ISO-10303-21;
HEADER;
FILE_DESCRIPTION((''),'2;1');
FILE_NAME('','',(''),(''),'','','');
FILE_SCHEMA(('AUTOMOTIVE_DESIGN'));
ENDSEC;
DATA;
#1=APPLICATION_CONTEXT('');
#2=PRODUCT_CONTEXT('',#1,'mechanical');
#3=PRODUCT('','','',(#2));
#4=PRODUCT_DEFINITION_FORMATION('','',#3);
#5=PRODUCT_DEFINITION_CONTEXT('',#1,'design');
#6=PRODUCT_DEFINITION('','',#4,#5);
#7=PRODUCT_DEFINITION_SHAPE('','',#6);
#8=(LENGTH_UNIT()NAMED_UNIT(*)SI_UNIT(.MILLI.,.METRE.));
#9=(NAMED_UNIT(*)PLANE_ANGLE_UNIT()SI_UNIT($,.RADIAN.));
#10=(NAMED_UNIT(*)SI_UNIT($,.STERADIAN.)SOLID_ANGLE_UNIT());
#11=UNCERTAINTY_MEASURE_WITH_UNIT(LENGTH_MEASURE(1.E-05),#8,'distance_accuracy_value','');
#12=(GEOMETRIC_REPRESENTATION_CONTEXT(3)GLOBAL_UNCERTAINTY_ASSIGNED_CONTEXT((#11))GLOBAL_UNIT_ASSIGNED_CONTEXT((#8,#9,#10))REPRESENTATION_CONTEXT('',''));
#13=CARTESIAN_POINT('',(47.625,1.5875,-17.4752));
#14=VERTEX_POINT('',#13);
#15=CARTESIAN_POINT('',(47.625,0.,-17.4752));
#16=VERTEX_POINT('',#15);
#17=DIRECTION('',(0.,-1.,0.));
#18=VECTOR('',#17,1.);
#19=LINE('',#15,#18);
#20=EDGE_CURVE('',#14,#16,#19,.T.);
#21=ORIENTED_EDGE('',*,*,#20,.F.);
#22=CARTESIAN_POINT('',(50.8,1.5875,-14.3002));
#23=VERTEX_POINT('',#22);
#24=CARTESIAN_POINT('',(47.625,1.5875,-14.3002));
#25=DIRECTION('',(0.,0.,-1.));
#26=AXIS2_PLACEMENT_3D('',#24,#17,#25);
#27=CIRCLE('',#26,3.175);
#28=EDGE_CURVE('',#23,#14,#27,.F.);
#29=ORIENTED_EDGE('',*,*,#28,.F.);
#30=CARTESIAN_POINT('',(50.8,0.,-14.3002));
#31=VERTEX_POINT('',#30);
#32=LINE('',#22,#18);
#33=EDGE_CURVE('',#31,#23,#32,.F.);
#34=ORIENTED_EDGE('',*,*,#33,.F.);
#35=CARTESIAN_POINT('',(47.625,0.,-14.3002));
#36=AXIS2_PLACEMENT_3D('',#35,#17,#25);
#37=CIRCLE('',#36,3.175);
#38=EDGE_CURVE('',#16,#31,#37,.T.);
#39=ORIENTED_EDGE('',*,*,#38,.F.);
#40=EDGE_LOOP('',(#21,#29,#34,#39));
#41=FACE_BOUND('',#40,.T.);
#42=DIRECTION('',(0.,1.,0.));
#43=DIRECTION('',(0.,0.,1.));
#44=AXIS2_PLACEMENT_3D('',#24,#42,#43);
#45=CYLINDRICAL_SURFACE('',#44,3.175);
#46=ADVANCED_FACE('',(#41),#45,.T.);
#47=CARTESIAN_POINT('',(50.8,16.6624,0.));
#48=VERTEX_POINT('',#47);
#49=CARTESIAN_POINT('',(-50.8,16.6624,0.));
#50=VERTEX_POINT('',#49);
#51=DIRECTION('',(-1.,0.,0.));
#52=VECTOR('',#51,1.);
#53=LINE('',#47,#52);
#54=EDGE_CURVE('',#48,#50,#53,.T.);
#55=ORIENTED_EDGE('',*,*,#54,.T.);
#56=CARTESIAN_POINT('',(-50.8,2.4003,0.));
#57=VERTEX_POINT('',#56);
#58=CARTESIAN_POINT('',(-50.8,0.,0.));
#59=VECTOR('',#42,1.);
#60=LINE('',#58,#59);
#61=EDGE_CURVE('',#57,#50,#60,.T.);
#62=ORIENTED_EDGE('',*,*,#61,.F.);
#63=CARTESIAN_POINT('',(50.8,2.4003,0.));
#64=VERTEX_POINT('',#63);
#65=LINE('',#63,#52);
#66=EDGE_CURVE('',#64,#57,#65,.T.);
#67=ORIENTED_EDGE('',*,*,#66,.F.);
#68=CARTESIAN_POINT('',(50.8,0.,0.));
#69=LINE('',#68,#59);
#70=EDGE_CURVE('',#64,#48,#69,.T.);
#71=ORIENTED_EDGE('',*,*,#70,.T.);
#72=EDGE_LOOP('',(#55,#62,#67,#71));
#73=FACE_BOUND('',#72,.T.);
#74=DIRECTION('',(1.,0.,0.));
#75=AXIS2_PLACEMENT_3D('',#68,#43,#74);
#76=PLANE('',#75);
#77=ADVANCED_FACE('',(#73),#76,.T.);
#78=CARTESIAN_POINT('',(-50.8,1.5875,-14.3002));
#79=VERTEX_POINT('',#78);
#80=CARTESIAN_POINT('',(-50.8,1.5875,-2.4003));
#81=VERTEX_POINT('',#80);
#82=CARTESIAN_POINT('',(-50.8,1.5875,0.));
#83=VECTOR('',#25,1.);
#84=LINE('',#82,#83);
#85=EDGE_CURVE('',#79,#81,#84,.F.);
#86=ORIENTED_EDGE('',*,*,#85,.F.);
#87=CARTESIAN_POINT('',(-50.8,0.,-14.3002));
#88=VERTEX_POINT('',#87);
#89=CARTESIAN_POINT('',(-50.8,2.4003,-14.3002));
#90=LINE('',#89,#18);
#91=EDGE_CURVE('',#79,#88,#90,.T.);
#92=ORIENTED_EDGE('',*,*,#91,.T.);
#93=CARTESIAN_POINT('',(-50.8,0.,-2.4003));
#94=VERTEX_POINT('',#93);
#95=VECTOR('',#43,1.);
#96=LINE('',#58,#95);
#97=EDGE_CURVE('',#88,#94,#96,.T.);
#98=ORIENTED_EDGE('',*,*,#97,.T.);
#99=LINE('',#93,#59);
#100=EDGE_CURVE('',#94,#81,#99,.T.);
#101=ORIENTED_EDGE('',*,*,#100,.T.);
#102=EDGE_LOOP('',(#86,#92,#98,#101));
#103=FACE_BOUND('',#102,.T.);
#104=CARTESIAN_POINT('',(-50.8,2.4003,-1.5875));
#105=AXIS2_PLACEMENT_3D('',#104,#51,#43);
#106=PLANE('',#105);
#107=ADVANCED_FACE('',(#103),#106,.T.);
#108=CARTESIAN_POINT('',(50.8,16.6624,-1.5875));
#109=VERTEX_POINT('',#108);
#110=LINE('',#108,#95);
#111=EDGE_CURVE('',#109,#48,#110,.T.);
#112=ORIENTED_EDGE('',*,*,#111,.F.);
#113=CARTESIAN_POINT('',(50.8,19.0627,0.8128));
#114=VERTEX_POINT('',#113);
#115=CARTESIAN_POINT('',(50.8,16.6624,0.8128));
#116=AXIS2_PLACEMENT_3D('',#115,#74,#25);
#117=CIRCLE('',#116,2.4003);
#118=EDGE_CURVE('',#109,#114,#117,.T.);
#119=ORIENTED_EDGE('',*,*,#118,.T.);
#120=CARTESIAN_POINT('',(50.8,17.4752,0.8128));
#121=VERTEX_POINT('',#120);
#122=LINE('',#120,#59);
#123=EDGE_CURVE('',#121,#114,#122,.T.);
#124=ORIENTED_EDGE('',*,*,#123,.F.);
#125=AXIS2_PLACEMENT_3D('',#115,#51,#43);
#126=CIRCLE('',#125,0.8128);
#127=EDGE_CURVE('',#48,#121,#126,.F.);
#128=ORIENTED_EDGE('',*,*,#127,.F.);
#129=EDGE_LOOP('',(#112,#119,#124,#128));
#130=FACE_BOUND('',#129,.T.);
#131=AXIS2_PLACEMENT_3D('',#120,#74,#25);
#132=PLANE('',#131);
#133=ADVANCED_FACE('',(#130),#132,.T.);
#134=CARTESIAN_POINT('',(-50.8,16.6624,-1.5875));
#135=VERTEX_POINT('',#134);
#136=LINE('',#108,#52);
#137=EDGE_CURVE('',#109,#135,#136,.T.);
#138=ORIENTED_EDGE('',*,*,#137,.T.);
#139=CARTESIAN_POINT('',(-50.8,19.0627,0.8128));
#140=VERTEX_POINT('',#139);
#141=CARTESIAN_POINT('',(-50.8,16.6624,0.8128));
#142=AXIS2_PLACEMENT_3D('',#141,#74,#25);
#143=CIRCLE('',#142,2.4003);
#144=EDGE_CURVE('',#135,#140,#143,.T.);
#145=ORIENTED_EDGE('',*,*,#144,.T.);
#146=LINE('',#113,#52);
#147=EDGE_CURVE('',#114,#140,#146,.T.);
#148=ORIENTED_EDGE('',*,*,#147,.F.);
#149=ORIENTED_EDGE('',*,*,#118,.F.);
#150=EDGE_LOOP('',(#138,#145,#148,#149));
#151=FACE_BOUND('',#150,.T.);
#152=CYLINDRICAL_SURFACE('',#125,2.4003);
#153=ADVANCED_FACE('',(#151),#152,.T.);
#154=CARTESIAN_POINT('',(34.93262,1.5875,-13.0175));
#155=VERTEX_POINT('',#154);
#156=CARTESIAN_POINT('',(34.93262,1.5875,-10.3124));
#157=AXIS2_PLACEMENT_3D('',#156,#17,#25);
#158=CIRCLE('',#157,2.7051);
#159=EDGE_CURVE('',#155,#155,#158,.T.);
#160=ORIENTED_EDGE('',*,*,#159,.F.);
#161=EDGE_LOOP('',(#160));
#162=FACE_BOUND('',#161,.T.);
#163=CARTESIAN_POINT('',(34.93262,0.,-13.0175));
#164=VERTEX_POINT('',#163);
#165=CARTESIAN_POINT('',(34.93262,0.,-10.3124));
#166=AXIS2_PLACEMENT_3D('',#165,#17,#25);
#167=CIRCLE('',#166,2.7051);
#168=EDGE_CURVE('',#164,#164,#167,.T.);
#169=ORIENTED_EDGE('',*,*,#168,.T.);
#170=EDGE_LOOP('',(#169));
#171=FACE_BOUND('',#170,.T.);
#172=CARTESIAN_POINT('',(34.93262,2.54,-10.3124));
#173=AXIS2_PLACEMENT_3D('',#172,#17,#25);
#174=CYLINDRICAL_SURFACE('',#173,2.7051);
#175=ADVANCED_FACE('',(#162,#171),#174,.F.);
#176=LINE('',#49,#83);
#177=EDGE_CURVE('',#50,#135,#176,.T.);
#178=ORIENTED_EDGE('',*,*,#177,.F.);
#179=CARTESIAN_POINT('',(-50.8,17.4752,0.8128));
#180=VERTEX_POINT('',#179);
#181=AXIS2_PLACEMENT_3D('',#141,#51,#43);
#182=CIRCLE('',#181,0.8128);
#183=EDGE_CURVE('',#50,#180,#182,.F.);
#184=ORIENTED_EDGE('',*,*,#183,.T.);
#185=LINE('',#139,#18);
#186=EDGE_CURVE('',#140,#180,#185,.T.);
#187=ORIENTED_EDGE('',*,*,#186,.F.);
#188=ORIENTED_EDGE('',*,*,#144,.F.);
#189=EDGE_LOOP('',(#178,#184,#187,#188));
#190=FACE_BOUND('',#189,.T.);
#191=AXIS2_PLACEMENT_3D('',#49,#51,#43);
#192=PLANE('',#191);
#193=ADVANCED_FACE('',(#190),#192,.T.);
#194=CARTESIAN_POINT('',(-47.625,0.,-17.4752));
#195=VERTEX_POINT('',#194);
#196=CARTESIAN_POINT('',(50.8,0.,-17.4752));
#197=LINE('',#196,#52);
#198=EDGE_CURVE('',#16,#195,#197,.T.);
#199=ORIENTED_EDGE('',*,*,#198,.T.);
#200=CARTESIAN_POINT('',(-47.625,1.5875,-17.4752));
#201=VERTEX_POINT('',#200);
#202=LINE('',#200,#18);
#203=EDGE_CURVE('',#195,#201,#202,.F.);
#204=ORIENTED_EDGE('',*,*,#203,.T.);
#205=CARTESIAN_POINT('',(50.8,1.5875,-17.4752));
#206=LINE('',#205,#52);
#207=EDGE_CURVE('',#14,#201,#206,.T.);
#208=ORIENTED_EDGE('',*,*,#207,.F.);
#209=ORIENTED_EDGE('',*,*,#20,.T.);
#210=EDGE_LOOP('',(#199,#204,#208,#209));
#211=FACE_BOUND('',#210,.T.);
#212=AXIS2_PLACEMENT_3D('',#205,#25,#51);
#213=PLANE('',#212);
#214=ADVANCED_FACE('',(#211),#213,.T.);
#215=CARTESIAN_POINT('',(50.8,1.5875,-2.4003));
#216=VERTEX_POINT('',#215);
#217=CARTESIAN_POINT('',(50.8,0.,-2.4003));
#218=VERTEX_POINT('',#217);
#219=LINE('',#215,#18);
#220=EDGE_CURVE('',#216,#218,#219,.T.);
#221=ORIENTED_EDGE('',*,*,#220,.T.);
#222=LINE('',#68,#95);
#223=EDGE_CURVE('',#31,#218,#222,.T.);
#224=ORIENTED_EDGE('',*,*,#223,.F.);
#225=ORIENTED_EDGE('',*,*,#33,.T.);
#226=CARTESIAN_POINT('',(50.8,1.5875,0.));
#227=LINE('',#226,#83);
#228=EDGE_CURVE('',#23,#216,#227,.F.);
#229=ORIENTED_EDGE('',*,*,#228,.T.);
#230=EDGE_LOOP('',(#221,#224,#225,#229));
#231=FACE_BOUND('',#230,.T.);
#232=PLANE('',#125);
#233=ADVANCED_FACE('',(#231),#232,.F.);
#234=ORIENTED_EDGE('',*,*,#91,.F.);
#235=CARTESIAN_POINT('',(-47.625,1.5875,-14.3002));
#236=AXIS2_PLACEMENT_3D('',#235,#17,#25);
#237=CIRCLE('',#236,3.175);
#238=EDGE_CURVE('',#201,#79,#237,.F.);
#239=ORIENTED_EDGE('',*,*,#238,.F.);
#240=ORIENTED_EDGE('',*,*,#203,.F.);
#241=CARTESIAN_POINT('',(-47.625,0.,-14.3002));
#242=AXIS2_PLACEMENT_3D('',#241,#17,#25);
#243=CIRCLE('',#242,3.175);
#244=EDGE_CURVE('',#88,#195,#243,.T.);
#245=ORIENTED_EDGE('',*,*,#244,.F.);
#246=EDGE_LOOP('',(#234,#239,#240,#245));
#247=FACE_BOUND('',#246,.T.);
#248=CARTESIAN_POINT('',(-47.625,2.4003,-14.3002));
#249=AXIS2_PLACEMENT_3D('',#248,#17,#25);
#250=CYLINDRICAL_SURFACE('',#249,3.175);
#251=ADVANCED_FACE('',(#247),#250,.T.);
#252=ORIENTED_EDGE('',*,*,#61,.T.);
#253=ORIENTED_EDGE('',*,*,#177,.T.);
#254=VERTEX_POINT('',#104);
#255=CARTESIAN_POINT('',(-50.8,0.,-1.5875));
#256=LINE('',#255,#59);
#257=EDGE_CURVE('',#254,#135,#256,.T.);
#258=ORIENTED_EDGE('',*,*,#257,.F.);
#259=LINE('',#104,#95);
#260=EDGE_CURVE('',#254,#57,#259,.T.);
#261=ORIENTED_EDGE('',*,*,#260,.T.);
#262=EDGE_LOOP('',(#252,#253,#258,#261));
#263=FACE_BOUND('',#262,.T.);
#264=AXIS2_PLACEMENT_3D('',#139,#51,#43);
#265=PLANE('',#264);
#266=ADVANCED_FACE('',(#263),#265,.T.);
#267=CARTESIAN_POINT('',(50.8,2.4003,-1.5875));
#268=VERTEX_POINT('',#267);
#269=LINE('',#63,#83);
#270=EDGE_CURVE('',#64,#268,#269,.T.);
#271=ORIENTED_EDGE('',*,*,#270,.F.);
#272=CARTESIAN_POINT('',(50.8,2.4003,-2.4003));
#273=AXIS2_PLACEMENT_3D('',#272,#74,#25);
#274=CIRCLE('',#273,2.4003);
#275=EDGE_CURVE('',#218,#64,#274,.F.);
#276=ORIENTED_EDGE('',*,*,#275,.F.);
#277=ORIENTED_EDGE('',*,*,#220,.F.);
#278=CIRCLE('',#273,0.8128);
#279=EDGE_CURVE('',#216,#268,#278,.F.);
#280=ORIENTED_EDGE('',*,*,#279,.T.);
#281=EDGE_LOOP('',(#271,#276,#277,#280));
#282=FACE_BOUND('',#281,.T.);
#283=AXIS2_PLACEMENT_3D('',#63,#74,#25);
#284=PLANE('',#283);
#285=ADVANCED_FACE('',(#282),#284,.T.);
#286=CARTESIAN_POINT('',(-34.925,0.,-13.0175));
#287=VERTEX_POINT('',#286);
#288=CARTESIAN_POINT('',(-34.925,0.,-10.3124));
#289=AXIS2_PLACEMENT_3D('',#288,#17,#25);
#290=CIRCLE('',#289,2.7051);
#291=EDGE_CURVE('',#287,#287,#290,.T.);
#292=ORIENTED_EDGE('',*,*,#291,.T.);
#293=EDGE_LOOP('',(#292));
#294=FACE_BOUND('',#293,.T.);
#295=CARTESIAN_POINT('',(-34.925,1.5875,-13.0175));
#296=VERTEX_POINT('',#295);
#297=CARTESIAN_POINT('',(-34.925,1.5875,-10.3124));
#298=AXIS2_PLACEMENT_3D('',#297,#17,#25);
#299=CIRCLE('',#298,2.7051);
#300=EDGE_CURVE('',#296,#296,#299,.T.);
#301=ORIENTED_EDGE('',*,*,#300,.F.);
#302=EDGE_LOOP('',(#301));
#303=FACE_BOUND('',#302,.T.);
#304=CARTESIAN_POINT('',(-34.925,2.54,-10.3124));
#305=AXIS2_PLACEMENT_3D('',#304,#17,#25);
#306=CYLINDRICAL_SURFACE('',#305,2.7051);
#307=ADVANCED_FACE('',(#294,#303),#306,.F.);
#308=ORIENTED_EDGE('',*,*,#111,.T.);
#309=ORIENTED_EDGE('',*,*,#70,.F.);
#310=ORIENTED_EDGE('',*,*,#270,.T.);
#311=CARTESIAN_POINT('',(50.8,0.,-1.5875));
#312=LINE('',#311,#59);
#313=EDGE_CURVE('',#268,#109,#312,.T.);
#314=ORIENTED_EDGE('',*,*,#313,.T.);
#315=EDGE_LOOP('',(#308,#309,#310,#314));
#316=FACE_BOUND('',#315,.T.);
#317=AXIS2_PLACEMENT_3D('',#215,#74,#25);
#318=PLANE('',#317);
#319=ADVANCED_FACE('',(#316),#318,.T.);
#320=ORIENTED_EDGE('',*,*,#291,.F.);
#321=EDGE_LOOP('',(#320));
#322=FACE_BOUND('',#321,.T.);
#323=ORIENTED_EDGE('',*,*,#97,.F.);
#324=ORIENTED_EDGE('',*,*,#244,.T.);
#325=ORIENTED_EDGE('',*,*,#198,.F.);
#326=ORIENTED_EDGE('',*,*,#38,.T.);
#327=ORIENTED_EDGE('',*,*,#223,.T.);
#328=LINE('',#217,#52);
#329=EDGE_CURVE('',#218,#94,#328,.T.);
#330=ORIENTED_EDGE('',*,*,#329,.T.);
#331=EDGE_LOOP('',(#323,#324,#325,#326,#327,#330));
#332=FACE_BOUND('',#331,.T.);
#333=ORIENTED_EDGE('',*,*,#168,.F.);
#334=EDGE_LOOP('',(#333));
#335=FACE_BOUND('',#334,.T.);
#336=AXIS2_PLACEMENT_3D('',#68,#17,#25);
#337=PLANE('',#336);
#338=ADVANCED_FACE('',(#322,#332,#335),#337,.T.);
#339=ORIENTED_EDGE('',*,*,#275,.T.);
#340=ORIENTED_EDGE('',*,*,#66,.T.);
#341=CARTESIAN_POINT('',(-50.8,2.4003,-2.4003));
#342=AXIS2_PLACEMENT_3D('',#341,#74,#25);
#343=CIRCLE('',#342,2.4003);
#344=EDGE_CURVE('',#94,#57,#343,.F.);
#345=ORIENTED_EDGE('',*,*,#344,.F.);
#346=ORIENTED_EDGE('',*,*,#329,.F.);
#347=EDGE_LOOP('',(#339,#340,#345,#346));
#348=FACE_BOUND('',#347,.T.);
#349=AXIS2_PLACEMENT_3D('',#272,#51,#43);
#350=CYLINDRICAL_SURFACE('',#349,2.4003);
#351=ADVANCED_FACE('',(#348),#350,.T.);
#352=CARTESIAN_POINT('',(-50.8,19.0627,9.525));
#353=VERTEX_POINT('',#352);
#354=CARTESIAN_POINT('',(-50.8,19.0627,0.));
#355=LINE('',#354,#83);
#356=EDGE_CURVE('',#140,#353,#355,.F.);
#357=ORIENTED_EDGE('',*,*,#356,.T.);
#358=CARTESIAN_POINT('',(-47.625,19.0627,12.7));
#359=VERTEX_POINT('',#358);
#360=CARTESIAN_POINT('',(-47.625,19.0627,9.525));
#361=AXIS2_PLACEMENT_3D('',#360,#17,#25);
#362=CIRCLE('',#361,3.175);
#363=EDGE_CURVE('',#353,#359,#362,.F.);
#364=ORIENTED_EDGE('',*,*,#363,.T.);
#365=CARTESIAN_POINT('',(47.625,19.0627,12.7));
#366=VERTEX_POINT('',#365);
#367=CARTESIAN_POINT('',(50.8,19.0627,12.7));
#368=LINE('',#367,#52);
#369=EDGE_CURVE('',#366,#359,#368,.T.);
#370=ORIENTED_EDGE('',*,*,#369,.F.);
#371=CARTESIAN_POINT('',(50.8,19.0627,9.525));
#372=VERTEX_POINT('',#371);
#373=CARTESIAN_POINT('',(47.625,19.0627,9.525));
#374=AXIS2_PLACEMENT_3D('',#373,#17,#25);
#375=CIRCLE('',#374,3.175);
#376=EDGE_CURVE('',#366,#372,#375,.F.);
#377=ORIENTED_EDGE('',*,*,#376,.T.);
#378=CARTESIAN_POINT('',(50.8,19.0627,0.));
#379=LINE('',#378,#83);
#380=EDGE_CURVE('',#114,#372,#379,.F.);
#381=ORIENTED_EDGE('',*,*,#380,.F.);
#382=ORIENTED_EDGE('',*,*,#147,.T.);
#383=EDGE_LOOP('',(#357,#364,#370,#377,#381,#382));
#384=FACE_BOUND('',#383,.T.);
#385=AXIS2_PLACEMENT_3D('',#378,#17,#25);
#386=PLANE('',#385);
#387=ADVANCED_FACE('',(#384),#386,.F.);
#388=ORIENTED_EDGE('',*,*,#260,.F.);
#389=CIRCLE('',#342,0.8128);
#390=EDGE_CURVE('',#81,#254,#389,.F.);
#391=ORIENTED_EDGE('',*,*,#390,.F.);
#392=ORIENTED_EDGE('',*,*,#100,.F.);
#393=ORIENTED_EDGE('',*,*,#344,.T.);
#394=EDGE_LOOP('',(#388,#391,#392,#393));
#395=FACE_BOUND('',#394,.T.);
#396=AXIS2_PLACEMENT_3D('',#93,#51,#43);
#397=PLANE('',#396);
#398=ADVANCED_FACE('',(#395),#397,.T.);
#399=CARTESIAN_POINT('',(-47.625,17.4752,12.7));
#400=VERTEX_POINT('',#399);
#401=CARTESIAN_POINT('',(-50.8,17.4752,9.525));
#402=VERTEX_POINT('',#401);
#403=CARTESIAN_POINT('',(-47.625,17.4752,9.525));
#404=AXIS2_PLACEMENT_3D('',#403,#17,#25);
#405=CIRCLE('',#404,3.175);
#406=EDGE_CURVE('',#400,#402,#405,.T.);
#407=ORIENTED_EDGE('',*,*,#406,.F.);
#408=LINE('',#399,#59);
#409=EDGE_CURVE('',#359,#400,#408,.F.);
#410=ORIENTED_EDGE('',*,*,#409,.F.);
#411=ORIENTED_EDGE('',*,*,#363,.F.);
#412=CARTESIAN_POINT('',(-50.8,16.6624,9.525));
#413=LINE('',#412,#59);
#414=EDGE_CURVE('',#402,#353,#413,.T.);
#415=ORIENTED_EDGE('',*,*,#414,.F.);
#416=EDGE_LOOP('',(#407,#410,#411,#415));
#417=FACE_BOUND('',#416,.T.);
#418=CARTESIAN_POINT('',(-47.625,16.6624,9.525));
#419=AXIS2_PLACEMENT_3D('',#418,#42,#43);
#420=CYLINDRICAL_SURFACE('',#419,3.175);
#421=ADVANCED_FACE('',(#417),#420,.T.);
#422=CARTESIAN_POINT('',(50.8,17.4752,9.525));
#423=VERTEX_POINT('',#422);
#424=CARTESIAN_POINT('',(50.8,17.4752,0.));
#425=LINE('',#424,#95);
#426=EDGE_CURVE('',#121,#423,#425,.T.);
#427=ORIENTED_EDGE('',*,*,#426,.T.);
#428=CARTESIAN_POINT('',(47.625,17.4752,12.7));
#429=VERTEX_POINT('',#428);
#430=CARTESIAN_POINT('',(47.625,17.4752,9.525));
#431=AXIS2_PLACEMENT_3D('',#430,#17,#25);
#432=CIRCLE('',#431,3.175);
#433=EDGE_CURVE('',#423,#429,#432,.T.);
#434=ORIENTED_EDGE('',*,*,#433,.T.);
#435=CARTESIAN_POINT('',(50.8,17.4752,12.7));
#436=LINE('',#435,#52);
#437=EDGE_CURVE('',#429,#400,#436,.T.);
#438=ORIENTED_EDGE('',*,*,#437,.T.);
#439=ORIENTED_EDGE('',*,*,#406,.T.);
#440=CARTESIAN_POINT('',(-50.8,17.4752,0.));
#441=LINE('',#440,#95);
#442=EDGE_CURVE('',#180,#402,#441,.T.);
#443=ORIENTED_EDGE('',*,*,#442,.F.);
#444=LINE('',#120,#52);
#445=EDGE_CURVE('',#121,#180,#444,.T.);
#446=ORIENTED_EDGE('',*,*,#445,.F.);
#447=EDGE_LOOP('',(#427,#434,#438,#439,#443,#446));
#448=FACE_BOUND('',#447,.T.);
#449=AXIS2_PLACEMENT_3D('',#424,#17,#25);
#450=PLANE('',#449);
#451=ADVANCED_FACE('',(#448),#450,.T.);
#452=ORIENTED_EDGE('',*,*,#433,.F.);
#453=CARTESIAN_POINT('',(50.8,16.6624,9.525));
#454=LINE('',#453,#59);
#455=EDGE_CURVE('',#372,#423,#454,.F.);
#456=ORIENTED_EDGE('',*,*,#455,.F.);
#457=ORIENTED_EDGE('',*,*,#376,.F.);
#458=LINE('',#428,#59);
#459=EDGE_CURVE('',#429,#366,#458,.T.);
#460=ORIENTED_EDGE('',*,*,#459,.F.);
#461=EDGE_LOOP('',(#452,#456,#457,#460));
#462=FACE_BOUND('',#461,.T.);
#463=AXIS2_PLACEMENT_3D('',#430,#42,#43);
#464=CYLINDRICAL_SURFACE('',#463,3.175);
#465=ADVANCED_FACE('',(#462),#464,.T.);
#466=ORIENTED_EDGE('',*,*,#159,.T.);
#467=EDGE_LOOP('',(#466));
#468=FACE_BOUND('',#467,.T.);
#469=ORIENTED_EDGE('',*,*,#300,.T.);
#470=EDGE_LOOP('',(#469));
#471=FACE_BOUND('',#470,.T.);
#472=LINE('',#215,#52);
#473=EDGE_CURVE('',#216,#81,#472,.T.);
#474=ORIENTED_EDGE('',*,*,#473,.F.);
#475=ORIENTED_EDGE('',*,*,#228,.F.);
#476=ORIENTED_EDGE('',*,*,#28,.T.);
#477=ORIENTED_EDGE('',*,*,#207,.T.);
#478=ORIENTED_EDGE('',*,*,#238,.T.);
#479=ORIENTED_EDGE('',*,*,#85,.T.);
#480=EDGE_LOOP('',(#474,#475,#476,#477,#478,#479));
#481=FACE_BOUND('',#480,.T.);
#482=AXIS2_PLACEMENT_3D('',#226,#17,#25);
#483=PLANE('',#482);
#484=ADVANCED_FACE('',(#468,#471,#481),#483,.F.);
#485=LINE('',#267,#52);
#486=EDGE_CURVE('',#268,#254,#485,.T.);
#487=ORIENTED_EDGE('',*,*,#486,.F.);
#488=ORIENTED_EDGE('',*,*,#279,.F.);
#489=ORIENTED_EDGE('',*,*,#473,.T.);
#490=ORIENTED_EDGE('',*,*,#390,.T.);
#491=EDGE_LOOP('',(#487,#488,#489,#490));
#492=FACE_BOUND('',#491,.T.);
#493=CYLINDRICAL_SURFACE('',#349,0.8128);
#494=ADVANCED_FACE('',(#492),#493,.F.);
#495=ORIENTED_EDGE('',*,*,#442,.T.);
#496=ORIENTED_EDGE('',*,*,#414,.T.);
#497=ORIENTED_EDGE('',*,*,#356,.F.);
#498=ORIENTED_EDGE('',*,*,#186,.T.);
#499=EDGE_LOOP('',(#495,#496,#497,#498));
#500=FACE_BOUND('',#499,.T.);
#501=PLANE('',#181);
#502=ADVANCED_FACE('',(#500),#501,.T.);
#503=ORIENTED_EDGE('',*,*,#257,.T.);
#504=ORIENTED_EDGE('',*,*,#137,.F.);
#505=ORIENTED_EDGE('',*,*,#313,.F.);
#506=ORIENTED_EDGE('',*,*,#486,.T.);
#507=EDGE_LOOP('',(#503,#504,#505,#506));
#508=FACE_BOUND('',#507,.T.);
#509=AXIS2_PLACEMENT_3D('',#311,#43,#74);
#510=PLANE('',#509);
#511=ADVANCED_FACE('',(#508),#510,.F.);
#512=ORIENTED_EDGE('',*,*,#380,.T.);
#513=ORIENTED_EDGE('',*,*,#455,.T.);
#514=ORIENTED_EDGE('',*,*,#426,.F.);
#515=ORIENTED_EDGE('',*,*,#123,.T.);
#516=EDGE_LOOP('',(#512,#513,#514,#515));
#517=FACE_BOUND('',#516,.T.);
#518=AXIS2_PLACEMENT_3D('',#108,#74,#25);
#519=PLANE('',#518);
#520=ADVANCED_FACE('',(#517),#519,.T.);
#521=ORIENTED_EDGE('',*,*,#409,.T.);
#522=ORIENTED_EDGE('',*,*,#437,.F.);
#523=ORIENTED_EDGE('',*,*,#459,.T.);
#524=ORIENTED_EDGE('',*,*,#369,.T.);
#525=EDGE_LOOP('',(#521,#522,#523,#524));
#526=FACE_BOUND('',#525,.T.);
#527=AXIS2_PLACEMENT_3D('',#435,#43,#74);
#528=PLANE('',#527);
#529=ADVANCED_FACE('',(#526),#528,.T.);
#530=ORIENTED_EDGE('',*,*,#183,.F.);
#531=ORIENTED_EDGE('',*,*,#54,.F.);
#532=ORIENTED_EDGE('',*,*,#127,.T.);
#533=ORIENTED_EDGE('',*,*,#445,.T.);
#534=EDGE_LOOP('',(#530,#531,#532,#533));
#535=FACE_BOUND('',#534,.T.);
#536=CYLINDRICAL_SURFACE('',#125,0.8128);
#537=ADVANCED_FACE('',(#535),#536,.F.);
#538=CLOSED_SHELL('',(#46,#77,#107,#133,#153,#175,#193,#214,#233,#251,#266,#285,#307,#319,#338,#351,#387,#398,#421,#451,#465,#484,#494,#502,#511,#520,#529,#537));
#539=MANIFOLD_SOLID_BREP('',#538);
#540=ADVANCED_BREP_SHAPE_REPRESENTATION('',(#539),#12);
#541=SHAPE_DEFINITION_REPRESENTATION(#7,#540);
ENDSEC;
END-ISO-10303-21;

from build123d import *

# Parameters (mm, degrees)
BASE_FLANGE1_DEPTH = 50.8
SKETCH4_R          = 2.7051
CUT_EXTRUDE1_DEPTH = 2.54
FILLET1_R          = 3.175


# Sheet-metal steps are written as plain solids
with BuildPart() as part:
    # Sketch1 → Base-Flange1 (new, symmetric)
    with BuildSketch(Plane(origin=(0, 0, 0), x_dir=(0, 0, -1), z_dir=(1, 0, 0))):
        with BuildLine():
            Line((-12.7, 17.4752), (-0.8128, 17.4752))
            ThreePointArc((-0.8128, 17.4752), (-0.238063608, 17.237136392), (0, 16.6624))
            Line((0, 16.6624), (0, 2.4003))
            ThreePointArc((0, 2.4003), (0.703031593, 0.703031593), (2.4003, 0))
            Line((2.4003, 0), (17.4752, 0))
            Line((17.4752, 0), (17.4752, 1.5875))
            Line((17.4752, 1.5875), (2.4003, 1.5875))
            ThreePointArc((2.4003, 1.5875), (1.825563608, 1.825563608), (1.5875, 2.4003))
            Line((1.5875, 2.4003), (1.5875, 16.6624))
            ThreePointArc((1.5875, 16.6624), (0.884468407, 18.359668407), (-0.8128, 19.0627))
            Line((-0.8128, 19.0627), (-12.7, 19.0627))
            Line((-12.7, 19.0627), (-12.7, 17.4752))
        make_face()
    extrude(amount=BASE_FLANGE1_DEPTH, both=True)

    # Sketch4 → Cut-Extrude1 (cut)
    with BuildSketch(Plane.XZ):
        with Locations(Location((34.93262, -10.3124, 0), (0, 0, 270))):
            Circle(SKETCH4_R)
        with Locations(Location((-34.925, -10.3124, 0), (0, 0, 270))):
            Circle(SKETCH4_R)
    extrude(amount=-CUT_EXTRUDE1_DEPTH, mode=Mode.SUBTRACT)

    # Fillet1
    fillet1_edges = [part.edges().sort_by_distance(p)[0] for p in [
        (-50.8, 0.79375, -17.4752),
        (-50.8, 18.26895, 12.7),
        (50.8, 0.79375, -17.4752),
        (50.8, 18.26895, 12.7),
    ]]
    fillet(fillet1_edges, radius=FILLET1_R)


solid = part.part
